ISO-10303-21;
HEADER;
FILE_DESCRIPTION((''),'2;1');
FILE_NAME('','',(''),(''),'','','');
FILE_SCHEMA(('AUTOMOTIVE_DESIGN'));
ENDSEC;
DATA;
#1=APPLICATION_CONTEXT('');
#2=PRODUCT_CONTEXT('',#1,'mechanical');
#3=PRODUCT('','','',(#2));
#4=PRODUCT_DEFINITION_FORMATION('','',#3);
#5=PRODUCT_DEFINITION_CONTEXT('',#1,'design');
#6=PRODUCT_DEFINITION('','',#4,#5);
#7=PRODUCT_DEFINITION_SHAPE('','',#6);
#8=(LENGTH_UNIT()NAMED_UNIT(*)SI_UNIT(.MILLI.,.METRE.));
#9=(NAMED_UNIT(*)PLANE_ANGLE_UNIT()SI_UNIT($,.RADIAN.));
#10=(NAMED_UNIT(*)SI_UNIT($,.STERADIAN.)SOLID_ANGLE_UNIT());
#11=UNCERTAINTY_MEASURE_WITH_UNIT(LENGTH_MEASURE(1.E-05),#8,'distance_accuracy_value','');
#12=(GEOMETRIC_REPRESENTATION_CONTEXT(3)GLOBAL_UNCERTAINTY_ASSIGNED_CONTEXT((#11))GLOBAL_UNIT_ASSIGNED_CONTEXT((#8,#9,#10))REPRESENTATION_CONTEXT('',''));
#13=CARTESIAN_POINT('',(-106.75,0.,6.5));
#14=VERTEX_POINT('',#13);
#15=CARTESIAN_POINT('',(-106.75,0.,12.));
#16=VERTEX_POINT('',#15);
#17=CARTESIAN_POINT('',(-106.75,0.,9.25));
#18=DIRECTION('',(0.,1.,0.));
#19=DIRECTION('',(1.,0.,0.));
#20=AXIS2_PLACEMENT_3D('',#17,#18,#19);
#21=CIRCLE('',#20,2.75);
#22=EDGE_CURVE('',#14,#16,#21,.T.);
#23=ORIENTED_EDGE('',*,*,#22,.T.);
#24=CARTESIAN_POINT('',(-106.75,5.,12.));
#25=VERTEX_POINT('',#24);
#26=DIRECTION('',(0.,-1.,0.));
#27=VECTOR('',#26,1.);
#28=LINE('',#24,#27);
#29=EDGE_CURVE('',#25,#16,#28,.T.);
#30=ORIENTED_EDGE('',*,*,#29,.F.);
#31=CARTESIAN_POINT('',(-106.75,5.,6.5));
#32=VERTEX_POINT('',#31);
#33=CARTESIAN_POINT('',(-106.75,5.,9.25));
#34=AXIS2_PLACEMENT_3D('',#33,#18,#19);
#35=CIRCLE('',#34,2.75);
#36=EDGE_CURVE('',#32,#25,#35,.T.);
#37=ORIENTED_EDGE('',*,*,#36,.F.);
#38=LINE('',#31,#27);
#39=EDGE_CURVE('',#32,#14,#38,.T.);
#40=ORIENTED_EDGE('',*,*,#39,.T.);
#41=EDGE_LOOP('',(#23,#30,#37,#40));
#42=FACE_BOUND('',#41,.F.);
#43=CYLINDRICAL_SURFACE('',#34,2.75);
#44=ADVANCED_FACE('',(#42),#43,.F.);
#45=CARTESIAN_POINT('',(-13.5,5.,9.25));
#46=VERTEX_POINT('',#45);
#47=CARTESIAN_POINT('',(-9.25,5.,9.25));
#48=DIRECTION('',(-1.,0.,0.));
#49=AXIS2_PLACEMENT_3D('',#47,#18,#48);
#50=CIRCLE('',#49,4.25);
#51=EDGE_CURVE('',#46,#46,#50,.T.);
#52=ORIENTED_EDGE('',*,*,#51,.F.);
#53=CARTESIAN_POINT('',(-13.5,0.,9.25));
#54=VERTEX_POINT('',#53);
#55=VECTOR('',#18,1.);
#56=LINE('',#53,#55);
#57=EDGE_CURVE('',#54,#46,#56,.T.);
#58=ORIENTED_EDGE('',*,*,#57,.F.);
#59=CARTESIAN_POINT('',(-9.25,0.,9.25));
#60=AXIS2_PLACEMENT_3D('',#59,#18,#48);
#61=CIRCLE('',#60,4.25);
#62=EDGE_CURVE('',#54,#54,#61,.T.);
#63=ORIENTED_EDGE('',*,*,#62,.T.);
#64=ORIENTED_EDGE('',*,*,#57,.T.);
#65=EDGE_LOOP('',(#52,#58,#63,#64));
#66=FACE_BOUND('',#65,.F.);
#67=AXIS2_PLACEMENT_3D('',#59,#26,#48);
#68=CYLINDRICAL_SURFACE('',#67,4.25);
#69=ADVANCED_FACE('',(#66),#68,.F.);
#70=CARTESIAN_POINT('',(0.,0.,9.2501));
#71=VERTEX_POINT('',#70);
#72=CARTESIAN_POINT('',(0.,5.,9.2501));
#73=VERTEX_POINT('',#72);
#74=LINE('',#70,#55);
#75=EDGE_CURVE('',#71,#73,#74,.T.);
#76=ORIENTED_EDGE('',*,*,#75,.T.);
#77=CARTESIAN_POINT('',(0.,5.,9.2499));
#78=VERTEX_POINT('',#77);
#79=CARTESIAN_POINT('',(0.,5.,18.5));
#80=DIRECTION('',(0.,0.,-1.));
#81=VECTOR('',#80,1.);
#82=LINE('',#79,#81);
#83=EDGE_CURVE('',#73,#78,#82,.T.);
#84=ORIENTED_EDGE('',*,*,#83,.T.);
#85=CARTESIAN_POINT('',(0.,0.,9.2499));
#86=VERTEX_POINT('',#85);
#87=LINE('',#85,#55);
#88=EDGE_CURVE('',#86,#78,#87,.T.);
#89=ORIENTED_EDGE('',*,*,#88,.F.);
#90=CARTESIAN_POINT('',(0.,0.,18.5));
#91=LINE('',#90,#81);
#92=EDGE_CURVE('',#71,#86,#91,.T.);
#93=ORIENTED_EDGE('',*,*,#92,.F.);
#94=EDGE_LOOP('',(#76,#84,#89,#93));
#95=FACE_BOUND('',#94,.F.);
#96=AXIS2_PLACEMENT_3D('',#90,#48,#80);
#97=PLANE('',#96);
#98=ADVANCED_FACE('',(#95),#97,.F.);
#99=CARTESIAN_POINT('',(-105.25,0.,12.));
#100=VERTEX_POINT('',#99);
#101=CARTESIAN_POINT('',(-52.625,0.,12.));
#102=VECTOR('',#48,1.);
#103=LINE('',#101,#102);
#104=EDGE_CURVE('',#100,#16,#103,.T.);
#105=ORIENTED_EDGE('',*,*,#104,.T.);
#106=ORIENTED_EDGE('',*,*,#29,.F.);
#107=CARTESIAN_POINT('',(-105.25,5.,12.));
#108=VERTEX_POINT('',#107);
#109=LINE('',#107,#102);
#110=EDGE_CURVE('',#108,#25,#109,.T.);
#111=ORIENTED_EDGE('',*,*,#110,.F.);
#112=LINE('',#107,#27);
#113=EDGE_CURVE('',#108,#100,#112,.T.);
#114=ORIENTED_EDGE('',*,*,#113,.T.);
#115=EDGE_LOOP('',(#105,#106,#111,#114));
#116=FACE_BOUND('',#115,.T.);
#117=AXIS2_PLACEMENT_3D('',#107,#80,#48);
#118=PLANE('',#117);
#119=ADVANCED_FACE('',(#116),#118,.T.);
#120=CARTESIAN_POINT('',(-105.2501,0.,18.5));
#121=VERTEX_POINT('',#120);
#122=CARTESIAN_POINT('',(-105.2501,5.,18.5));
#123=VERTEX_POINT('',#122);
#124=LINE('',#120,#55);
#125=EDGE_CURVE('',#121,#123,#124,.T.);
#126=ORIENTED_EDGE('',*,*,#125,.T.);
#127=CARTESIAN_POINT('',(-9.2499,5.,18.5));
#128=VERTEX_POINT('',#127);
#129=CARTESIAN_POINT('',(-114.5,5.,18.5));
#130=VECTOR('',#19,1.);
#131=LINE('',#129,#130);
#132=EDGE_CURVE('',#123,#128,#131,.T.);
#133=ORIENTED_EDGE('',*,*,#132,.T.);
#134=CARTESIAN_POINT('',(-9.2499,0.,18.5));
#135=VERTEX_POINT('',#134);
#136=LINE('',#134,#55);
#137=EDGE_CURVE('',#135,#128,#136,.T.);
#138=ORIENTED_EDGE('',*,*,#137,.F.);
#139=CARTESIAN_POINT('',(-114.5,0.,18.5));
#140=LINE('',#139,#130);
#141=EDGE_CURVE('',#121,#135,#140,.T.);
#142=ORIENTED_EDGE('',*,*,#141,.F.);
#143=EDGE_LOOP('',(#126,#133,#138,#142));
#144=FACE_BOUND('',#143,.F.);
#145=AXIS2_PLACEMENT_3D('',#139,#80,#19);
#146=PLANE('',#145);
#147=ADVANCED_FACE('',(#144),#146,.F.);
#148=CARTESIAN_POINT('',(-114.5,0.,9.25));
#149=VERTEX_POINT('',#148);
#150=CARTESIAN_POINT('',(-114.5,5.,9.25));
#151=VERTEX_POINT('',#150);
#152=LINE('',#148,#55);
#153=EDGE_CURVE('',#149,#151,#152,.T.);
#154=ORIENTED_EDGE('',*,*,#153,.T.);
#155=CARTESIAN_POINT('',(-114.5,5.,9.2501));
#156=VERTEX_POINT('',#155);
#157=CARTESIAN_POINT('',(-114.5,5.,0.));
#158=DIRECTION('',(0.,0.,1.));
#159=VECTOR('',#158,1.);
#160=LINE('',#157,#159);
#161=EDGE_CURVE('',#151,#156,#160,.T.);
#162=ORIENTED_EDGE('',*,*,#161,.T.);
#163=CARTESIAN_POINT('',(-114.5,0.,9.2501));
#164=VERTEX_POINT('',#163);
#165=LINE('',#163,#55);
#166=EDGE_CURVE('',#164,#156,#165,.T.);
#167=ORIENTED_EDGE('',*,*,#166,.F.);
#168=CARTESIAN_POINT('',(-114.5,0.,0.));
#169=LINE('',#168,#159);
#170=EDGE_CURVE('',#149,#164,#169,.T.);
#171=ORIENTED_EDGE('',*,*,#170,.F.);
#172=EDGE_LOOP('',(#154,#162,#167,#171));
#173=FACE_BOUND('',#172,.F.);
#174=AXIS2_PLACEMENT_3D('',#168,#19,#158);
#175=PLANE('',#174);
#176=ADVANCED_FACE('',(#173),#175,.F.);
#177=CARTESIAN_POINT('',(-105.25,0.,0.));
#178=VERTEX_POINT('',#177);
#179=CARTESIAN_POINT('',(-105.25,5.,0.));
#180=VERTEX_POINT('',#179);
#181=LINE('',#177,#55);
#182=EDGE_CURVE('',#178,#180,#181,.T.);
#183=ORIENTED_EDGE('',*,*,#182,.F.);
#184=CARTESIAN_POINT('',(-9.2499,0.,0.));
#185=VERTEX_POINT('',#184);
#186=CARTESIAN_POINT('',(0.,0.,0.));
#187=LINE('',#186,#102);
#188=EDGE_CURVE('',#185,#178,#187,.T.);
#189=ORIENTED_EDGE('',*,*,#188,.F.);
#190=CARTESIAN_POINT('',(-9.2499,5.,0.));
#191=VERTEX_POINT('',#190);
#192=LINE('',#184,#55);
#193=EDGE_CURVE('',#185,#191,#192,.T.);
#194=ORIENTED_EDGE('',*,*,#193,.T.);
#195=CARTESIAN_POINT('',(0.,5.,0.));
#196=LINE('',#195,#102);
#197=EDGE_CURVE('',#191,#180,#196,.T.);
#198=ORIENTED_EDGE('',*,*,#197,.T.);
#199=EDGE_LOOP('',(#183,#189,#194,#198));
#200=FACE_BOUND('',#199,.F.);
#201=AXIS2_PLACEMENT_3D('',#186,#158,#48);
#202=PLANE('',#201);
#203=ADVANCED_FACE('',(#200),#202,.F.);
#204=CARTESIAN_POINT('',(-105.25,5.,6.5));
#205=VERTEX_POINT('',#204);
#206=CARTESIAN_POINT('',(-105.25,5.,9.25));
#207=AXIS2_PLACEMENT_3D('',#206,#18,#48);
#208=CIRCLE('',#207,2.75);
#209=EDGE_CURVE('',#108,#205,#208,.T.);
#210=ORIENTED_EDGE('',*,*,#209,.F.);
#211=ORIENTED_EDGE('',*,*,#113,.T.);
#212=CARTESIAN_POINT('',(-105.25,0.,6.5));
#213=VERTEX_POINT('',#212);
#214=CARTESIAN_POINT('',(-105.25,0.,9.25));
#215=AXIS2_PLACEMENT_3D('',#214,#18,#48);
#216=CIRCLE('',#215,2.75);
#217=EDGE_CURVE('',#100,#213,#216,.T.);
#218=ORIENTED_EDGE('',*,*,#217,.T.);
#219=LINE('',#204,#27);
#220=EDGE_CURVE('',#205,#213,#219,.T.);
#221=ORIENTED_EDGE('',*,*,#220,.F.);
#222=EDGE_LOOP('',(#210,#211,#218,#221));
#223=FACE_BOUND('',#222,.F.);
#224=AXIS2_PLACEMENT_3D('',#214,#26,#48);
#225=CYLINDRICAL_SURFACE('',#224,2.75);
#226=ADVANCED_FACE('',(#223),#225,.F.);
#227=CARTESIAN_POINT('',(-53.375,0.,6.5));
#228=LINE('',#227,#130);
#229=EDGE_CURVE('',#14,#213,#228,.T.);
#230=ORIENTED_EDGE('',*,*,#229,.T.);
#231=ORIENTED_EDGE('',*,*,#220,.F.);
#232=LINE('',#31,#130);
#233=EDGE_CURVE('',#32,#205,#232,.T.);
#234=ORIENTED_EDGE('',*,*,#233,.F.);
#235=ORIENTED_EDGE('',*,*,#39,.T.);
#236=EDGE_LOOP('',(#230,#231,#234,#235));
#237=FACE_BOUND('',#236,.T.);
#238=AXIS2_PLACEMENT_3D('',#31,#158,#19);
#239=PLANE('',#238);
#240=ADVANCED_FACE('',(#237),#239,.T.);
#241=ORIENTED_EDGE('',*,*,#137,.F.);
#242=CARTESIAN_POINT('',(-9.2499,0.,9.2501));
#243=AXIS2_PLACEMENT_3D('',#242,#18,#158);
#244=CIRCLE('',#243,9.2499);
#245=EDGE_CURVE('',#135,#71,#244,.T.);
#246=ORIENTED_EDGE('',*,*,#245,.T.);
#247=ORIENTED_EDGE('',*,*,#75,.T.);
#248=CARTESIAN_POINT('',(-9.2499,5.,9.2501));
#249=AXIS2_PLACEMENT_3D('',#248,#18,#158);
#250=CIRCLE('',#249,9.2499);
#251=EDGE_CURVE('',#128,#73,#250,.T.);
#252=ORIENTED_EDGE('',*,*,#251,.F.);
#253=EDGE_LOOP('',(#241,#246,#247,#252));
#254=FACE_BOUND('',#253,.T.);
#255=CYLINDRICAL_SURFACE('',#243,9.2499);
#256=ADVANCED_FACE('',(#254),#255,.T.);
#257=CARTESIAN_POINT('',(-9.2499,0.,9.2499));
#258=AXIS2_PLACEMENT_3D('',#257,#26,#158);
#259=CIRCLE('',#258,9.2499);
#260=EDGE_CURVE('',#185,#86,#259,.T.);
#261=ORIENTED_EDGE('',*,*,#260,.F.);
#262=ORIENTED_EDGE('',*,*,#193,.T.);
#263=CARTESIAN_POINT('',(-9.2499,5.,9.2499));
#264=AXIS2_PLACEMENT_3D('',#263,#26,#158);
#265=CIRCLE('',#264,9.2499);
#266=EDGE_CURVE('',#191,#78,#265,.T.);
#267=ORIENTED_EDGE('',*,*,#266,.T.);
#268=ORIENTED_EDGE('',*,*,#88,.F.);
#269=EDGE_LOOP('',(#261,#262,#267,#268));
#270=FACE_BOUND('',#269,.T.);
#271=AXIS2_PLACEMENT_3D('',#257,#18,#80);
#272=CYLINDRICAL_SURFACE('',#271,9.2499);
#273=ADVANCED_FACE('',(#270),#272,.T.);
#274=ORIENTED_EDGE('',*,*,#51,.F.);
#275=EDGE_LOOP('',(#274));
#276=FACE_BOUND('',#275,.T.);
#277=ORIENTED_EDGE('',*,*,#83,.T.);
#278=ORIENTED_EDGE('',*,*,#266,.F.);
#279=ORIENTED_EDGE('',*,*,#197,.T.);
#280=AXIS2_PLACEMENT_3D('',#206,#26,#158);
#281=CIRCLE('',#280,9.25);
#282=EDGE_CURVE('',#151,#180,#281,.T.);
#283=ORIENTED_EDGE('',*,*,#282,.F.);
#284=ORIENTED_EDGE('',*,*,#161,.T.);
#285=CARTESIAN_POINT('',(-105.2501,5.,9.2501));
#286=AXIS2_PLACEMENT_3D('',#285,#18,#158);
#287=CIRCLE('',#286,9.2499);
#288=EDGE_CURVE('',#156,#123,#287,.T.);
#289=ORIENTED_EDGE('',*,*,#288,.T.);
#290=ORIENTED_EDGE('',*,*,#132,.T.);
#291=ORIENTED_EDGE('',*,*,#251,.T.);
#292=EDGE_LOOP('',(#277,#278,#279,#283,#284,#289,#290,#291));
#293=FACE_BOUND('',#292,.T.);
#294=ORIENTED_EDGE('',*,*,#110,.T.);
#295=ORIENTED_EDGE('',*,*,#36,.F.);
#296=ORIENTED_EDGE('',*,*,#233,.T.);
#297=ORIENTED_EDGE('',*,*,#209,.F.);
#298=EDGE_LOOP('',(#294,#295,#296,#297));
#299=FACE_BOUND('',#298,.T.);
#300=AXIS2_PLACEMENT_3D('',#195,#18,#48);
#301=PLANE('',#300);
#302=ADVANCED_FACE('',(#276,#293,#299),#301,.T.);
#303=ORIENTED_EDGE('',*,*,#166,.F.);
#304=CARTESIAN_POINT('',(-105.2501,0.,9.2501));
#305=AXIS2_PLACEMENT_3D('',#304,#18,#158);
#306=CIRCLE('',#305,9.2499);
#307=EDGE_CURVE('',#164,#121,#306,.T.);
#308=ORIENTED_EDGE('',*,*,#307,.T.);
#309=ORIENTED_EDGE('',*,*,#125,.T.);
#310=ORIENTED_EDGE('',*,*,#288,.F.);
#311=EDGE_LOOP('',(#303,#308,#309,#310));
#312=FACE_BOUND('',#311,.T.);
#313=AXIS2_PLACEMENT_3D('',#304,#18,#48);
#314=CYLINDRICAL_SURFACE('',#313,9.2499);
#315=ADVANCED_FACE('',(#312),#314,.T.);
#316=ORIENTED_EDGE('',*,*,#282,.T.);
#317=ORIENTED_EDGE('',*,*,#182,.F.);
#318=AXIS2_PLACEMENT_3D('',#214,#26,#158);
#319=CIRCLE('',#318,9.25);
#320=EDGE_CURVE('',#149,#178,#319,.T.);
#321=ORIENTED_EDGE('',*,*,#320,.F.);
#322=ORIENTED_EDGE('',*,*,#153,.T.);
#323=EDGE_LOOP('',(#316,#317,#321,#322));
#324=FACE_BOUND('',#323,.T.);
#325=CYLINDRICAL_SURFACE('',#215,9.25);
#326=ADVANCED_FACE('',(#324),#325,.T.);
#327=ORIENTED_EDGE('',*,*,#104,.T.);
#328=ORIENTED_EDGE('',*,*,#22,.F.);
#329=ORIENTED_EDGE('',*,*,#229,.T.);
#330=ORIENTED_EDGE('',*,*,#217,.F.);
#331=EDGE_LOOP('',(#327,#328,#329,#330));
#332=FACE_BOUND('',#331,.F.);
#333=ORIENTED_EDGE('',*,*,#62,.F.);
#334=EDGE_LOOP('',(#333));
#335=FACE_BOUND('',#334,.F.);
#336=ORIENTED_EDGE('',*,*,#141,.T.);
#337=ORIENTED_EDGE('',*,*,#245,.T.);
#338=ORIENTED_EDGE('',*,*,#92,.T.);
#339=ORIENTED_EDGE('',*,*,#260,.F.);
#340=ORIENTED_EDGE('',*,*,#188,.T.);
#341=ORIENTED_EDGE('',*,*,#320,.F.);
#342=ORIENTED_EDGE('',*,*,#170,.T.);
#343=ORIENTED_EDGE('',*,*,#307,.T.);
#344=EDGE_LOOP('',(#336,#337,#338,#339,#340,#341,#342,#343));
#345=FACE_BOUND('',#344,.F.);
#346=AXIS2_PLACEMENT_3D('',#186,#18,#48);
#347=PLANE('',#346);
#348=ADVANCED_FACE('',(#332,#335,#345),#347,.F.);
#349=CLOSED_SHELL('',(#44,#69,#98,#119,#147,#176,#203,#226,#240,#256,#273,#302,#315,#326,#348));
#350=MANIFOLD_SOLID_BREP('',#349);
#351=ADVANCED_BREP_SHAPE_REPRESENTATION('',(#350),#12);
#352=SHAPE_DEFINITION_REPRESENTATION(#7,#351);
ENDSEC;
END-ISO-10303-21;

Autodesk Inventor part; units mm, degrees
ref_plane "YZ Plane" through (0, 0, 0) normal (1, 0, 0) x (0, 1, 0)
ref_plane "XZ Plane" through (0, 0, 0) normal (0, 1, 0) x (-1, 0, 0)
ref_plane "XY Plane" through (0, 0, 0) normal (0, 0, 1) x (1, 0, 0)
sketch "Sketch1" plane through (0, 0, 0) normal (0, 1, 0) x (-1, 0, 0)
  line L0 (0, 0) -> (114.5, 0)
  line L1 (114.5, 0) -> (114.5, 18.5)
  line L2 (114.5, 18.5) -> (0, 18.5)
  line L3 (0, 18.5) -> (0, 0)
  circle A0 centre (105.25, 9.25) radius 2.75
  circle A1 centre (9.25, 9.25) radius 4.25
  dimension "d12" = 5.5
  dimension "d44" = 8.5
  dimension "d52" = 96
  dimension "d57" = 9.25
  dimension "d58" = 9.25
  dimension "d59" = 9.25
  dimension "d60" = 9.25
extrude "Extrusion3" add sketch "Sketch1" along normal blind 5
fillet "Fillet3" radius 9.25 1 edges at (-114.5, 2.5, 0)
fillet "Fillet4" radius 9.25 3 edges at (-114.5, 2.5, 18.5) (0, 2.5, 18.5) (0, 2.5, 0)
sketch "Sketch2" plane through (0, 0, 0) normal (0, -1, 0) x (1, 0, 0)
  point P0 (0, 0)
sketch "Sketch3" plane through (0, 5, 0) normal (0, 1, 0) x (1, 0, 0)
  circle A0 centre (-105.25, -9.25) radius 2.75 projected
  circle A1 centre (-106.75, -9.25) radius 2.75
  line L0 (-106.75, -6.5) -> (-105.25, -6.5)
  line L1 (-105.25, -12) -> (-106.75, -12)
  line L2 (-106.75, -6.5) -> (-105.25, -6.5)
  line L3 (-106.75, -12) -> (-105.25, -12)
  point P0 (0, 0)
  dimension "d62" = 5.5
  dimension "d64" = 1.5
extrude "Extrusion4" cut sketch "Sketch3" against normal blind 10 contours A0 A1 L0 | L1 A1 A0 | A0 A1 picked at (-108.9803, -9.1424)
properties part number "crankRod1"
